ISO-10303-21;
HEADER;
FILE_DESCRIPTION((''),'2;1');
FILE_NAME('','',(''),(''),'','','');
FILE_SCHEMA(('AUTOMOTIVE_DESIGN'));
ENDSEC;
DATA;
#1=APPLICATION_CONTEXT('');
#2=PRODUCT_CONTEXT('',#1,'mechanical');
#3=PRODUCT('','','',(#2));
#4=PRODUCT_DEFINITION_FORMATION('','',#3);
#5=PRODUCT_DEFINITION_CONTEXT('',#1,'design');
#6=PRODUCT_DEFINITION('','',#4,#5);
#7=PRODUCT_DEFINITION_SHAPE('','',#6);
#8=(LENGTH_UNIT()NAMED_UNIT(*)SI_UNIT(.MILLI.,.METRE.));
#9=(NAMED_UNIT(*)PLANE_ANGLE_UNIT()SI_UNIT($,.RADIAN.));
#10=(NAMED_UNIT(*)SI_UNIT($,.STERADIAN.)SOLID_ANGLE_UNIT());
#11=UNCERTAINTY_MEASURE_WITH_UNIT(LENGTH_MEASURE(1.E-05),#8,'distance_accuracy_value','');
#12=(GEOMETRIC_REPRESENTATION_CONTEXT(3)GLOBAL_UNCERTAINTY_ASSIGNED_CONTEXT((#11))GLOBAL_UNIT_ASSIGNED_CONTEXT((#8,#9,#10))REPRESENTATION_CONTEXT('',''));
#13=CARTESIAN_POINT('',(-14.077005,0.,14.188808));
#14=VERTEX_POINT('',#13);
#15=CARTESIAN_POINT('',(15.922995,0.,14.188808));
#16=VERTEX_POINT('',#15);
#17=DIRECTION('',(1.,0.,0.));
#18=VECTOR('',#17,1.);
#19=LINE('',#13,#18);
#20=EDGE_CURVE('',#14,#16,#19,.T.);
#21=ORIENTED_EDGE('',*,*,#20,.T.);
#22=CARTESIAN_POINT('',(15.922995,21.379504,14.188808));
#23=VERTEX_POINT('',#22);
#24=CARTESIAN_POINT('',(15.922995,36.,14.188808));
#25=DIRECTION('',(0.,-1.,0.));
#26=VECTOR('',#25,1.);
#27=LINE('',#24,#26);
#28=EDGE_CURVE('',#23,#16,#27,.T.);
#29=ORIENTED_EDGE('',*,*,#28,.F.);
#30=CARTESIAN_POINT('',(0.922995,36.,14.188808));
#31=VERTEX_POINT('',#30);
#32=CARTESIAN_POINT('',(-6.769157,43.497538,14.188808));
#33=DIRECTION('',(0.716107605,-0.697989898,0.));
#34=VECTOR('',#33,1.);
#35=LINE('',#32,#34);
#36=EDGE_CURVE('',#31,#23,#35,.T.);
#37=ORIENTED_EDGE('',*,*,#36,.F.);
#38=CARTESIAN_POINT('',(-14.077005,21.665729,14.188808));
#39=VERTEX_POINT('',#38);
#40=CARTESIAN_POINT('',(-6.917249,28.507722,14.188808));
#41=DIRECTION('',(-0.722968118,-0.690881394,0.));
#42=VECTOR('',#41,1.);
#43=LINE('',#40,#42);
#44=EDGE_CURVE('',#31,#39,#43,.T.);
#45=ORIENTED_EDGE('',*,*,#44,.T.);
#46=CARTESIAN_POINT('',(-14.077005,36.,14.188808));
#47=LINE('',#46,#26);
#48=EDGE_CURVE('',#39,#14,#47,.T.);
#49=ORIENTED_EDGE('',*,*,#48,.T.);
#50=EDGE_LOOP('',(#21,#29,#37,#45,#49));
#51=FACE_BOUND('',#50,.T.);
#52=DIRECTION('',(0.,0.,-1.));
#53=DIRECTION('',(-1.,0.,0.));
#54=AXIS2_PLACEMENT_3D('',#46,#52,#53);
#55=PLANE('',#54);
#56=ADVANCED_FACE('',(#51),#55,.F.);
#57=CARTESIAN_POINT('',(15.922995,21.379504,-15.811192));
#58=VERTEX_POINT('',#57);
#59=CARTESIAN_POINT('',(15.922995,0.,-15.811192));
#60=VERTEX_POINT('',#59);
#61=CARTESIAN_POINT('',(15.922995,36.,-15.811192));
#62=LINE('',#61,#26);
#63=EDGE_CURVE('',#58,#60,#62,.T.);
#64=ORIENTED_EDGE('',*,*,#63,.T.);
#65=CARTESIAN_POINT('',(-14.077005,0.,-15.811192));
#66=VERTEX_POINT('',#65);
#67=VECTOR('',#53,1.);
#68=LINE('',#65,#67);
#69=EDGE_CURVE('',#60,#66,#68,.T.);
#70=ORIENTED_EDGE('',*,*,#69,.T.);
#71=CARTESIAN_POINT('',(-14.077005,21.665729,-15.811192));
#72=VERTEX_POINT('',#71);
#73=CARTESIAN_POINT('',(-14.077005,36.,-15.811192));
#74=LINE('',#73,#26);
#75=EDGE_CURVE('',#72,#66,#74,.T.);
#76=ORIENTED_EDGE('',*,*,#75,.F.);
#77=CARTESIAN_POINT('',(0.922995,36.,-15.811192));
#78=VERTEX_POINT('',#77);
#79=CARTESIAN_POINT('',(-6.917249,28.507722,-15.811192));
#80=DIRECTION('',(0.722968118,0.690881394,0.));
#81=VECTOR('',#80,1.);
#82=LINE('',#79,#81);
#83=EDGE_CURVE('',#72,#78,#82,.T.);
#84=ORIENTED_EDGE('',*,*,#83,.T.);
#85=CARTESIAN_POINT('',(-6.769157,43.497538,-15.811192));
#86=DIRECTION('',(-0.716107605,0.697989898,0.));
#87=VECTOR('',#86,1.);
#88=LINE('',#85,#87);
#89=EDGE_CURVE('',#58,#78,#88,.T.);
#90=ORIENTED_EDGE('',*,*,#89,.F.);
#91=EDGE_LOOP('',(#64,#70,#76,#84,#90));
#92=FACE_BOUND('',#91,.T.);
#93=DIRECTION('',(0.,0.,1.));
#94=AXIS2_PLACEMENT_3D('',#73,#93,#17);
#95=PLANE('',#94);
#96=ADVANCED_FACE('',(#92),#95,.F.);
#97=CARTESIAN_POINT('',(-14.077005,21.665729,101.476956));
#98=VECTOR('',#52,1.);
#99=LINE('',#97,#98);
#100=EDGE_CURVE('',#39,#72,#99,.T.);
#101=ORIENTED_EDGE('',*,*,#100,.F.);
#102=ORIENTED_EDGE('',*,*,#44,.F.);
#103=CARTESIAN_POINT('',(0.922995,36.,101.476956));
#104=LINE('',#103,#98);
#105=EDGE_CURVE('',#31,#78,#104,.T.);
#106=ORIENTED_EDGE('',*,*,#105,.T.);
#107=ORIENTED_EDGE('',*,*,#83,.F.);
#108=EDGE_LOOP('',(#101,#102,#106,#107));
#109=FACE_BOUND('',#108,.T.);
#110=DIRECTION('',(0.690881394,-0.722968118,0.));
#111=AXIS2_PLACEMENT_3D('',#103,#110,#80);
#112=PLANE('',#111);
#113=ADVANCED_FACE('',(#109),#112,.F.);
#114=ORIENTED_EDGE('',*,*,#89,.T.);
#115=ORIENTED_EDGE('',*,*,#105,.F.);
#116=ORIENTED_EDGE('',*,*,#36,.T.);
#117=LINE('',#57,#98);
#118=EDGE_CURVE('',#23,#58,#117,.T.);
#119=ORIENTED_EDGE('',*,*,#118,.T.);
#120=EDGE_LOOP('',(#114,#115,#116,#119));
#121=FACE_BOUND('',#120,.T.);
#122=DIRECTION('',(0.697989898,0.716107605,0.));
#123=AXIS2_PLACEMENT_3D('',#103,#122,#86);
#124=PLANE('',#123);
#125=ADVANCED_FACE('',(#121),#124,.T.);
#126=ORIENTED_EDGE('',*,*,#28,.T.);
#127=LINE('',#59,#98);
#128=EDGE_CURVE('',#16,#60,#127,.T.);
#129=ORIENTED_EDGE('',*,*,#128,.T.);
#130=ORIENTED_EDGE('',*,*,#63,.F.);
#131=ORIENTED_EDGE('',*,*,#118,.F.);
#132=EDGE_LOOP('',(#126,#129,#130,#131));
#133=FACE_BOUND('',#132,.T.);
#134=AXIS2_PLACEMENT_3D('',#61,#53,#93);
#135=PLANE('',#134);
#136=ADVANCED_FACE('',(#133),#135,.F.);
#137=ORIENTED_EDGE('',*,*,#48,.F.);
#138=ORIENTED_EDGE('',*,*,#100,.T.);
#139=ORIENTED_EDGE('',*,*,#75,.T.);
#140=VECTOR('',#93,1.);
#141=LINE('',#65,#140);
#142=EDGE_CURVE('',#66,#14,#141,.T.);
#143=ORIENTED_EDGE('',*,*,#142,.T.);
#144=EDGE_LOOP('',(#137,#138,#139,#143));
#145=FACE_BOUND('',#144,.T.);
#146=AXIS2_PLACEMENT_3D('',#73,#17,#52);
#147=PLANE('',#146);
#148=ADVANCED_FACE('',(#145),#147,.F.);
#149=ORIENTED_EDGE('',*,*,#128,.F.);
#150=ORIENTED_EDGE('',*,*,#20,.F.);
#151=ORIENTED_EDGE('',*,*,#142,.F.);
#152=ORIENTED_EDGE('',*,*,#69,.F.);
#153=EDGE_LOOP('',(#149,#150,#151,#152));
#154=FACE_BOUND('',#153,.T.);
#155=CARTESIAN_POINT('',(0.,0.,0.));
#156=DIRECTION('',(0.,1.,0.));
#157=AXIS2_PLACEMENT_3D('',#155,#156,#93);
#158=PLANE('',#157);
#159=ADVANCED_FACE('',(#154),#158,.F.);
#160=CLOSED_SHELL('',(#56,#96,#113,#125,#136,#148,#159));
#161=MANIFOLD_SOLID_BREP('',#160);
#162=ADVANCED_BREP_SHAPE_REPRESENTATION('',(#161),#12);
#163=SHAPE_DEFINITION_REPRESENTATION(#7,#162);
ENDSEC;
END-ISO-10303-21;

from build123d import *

# Parameters (mm, degrees)
SKETCH_1_W          = 30
SKETCH_1_H          = 30
EXTRUDE_1_DEPTH     = 36
CUT_EXTRUDE_START   = -15.811192309
CUT_EXTRUDE_9_DEPTH = 30


# Read off the part's stored shape, not the designer's step: 切除-拉伸9
with BuildPart() as part:
    # 草图1 → 凸台-拉伸1 (new body)
    with BuildSketch(Plane(origin=(0, 0, 0), x_dir=(1, 0, 0), z_dir=(0, 1, 0))):
        with Locations((0.922994888, 0.811192309)):
            Rectangle(SKETCH_1_W, SKETCH_1_H)
    extrude(amount=EXTRUDE_1_DEPTH)

    # 切除-拉伸9 outline → 切除-拉伸9 (cut)
    with BuildSketch(Plane.XY.offset(CUT_EXTRUDE_START)):
        Polygon((-14.077005112, 36), (-14.077005112, 21.665729015), (0.922994888, 36), align=None)
        Polygon((15.922994888, 36), (0.922994888, 36), (15.922994888, 21.379503866), align=None)
    extrude(amount=CUT_EXTRUDE_9_DEPTH, mode=Mode.SUBTRACT)


solid = part.part
